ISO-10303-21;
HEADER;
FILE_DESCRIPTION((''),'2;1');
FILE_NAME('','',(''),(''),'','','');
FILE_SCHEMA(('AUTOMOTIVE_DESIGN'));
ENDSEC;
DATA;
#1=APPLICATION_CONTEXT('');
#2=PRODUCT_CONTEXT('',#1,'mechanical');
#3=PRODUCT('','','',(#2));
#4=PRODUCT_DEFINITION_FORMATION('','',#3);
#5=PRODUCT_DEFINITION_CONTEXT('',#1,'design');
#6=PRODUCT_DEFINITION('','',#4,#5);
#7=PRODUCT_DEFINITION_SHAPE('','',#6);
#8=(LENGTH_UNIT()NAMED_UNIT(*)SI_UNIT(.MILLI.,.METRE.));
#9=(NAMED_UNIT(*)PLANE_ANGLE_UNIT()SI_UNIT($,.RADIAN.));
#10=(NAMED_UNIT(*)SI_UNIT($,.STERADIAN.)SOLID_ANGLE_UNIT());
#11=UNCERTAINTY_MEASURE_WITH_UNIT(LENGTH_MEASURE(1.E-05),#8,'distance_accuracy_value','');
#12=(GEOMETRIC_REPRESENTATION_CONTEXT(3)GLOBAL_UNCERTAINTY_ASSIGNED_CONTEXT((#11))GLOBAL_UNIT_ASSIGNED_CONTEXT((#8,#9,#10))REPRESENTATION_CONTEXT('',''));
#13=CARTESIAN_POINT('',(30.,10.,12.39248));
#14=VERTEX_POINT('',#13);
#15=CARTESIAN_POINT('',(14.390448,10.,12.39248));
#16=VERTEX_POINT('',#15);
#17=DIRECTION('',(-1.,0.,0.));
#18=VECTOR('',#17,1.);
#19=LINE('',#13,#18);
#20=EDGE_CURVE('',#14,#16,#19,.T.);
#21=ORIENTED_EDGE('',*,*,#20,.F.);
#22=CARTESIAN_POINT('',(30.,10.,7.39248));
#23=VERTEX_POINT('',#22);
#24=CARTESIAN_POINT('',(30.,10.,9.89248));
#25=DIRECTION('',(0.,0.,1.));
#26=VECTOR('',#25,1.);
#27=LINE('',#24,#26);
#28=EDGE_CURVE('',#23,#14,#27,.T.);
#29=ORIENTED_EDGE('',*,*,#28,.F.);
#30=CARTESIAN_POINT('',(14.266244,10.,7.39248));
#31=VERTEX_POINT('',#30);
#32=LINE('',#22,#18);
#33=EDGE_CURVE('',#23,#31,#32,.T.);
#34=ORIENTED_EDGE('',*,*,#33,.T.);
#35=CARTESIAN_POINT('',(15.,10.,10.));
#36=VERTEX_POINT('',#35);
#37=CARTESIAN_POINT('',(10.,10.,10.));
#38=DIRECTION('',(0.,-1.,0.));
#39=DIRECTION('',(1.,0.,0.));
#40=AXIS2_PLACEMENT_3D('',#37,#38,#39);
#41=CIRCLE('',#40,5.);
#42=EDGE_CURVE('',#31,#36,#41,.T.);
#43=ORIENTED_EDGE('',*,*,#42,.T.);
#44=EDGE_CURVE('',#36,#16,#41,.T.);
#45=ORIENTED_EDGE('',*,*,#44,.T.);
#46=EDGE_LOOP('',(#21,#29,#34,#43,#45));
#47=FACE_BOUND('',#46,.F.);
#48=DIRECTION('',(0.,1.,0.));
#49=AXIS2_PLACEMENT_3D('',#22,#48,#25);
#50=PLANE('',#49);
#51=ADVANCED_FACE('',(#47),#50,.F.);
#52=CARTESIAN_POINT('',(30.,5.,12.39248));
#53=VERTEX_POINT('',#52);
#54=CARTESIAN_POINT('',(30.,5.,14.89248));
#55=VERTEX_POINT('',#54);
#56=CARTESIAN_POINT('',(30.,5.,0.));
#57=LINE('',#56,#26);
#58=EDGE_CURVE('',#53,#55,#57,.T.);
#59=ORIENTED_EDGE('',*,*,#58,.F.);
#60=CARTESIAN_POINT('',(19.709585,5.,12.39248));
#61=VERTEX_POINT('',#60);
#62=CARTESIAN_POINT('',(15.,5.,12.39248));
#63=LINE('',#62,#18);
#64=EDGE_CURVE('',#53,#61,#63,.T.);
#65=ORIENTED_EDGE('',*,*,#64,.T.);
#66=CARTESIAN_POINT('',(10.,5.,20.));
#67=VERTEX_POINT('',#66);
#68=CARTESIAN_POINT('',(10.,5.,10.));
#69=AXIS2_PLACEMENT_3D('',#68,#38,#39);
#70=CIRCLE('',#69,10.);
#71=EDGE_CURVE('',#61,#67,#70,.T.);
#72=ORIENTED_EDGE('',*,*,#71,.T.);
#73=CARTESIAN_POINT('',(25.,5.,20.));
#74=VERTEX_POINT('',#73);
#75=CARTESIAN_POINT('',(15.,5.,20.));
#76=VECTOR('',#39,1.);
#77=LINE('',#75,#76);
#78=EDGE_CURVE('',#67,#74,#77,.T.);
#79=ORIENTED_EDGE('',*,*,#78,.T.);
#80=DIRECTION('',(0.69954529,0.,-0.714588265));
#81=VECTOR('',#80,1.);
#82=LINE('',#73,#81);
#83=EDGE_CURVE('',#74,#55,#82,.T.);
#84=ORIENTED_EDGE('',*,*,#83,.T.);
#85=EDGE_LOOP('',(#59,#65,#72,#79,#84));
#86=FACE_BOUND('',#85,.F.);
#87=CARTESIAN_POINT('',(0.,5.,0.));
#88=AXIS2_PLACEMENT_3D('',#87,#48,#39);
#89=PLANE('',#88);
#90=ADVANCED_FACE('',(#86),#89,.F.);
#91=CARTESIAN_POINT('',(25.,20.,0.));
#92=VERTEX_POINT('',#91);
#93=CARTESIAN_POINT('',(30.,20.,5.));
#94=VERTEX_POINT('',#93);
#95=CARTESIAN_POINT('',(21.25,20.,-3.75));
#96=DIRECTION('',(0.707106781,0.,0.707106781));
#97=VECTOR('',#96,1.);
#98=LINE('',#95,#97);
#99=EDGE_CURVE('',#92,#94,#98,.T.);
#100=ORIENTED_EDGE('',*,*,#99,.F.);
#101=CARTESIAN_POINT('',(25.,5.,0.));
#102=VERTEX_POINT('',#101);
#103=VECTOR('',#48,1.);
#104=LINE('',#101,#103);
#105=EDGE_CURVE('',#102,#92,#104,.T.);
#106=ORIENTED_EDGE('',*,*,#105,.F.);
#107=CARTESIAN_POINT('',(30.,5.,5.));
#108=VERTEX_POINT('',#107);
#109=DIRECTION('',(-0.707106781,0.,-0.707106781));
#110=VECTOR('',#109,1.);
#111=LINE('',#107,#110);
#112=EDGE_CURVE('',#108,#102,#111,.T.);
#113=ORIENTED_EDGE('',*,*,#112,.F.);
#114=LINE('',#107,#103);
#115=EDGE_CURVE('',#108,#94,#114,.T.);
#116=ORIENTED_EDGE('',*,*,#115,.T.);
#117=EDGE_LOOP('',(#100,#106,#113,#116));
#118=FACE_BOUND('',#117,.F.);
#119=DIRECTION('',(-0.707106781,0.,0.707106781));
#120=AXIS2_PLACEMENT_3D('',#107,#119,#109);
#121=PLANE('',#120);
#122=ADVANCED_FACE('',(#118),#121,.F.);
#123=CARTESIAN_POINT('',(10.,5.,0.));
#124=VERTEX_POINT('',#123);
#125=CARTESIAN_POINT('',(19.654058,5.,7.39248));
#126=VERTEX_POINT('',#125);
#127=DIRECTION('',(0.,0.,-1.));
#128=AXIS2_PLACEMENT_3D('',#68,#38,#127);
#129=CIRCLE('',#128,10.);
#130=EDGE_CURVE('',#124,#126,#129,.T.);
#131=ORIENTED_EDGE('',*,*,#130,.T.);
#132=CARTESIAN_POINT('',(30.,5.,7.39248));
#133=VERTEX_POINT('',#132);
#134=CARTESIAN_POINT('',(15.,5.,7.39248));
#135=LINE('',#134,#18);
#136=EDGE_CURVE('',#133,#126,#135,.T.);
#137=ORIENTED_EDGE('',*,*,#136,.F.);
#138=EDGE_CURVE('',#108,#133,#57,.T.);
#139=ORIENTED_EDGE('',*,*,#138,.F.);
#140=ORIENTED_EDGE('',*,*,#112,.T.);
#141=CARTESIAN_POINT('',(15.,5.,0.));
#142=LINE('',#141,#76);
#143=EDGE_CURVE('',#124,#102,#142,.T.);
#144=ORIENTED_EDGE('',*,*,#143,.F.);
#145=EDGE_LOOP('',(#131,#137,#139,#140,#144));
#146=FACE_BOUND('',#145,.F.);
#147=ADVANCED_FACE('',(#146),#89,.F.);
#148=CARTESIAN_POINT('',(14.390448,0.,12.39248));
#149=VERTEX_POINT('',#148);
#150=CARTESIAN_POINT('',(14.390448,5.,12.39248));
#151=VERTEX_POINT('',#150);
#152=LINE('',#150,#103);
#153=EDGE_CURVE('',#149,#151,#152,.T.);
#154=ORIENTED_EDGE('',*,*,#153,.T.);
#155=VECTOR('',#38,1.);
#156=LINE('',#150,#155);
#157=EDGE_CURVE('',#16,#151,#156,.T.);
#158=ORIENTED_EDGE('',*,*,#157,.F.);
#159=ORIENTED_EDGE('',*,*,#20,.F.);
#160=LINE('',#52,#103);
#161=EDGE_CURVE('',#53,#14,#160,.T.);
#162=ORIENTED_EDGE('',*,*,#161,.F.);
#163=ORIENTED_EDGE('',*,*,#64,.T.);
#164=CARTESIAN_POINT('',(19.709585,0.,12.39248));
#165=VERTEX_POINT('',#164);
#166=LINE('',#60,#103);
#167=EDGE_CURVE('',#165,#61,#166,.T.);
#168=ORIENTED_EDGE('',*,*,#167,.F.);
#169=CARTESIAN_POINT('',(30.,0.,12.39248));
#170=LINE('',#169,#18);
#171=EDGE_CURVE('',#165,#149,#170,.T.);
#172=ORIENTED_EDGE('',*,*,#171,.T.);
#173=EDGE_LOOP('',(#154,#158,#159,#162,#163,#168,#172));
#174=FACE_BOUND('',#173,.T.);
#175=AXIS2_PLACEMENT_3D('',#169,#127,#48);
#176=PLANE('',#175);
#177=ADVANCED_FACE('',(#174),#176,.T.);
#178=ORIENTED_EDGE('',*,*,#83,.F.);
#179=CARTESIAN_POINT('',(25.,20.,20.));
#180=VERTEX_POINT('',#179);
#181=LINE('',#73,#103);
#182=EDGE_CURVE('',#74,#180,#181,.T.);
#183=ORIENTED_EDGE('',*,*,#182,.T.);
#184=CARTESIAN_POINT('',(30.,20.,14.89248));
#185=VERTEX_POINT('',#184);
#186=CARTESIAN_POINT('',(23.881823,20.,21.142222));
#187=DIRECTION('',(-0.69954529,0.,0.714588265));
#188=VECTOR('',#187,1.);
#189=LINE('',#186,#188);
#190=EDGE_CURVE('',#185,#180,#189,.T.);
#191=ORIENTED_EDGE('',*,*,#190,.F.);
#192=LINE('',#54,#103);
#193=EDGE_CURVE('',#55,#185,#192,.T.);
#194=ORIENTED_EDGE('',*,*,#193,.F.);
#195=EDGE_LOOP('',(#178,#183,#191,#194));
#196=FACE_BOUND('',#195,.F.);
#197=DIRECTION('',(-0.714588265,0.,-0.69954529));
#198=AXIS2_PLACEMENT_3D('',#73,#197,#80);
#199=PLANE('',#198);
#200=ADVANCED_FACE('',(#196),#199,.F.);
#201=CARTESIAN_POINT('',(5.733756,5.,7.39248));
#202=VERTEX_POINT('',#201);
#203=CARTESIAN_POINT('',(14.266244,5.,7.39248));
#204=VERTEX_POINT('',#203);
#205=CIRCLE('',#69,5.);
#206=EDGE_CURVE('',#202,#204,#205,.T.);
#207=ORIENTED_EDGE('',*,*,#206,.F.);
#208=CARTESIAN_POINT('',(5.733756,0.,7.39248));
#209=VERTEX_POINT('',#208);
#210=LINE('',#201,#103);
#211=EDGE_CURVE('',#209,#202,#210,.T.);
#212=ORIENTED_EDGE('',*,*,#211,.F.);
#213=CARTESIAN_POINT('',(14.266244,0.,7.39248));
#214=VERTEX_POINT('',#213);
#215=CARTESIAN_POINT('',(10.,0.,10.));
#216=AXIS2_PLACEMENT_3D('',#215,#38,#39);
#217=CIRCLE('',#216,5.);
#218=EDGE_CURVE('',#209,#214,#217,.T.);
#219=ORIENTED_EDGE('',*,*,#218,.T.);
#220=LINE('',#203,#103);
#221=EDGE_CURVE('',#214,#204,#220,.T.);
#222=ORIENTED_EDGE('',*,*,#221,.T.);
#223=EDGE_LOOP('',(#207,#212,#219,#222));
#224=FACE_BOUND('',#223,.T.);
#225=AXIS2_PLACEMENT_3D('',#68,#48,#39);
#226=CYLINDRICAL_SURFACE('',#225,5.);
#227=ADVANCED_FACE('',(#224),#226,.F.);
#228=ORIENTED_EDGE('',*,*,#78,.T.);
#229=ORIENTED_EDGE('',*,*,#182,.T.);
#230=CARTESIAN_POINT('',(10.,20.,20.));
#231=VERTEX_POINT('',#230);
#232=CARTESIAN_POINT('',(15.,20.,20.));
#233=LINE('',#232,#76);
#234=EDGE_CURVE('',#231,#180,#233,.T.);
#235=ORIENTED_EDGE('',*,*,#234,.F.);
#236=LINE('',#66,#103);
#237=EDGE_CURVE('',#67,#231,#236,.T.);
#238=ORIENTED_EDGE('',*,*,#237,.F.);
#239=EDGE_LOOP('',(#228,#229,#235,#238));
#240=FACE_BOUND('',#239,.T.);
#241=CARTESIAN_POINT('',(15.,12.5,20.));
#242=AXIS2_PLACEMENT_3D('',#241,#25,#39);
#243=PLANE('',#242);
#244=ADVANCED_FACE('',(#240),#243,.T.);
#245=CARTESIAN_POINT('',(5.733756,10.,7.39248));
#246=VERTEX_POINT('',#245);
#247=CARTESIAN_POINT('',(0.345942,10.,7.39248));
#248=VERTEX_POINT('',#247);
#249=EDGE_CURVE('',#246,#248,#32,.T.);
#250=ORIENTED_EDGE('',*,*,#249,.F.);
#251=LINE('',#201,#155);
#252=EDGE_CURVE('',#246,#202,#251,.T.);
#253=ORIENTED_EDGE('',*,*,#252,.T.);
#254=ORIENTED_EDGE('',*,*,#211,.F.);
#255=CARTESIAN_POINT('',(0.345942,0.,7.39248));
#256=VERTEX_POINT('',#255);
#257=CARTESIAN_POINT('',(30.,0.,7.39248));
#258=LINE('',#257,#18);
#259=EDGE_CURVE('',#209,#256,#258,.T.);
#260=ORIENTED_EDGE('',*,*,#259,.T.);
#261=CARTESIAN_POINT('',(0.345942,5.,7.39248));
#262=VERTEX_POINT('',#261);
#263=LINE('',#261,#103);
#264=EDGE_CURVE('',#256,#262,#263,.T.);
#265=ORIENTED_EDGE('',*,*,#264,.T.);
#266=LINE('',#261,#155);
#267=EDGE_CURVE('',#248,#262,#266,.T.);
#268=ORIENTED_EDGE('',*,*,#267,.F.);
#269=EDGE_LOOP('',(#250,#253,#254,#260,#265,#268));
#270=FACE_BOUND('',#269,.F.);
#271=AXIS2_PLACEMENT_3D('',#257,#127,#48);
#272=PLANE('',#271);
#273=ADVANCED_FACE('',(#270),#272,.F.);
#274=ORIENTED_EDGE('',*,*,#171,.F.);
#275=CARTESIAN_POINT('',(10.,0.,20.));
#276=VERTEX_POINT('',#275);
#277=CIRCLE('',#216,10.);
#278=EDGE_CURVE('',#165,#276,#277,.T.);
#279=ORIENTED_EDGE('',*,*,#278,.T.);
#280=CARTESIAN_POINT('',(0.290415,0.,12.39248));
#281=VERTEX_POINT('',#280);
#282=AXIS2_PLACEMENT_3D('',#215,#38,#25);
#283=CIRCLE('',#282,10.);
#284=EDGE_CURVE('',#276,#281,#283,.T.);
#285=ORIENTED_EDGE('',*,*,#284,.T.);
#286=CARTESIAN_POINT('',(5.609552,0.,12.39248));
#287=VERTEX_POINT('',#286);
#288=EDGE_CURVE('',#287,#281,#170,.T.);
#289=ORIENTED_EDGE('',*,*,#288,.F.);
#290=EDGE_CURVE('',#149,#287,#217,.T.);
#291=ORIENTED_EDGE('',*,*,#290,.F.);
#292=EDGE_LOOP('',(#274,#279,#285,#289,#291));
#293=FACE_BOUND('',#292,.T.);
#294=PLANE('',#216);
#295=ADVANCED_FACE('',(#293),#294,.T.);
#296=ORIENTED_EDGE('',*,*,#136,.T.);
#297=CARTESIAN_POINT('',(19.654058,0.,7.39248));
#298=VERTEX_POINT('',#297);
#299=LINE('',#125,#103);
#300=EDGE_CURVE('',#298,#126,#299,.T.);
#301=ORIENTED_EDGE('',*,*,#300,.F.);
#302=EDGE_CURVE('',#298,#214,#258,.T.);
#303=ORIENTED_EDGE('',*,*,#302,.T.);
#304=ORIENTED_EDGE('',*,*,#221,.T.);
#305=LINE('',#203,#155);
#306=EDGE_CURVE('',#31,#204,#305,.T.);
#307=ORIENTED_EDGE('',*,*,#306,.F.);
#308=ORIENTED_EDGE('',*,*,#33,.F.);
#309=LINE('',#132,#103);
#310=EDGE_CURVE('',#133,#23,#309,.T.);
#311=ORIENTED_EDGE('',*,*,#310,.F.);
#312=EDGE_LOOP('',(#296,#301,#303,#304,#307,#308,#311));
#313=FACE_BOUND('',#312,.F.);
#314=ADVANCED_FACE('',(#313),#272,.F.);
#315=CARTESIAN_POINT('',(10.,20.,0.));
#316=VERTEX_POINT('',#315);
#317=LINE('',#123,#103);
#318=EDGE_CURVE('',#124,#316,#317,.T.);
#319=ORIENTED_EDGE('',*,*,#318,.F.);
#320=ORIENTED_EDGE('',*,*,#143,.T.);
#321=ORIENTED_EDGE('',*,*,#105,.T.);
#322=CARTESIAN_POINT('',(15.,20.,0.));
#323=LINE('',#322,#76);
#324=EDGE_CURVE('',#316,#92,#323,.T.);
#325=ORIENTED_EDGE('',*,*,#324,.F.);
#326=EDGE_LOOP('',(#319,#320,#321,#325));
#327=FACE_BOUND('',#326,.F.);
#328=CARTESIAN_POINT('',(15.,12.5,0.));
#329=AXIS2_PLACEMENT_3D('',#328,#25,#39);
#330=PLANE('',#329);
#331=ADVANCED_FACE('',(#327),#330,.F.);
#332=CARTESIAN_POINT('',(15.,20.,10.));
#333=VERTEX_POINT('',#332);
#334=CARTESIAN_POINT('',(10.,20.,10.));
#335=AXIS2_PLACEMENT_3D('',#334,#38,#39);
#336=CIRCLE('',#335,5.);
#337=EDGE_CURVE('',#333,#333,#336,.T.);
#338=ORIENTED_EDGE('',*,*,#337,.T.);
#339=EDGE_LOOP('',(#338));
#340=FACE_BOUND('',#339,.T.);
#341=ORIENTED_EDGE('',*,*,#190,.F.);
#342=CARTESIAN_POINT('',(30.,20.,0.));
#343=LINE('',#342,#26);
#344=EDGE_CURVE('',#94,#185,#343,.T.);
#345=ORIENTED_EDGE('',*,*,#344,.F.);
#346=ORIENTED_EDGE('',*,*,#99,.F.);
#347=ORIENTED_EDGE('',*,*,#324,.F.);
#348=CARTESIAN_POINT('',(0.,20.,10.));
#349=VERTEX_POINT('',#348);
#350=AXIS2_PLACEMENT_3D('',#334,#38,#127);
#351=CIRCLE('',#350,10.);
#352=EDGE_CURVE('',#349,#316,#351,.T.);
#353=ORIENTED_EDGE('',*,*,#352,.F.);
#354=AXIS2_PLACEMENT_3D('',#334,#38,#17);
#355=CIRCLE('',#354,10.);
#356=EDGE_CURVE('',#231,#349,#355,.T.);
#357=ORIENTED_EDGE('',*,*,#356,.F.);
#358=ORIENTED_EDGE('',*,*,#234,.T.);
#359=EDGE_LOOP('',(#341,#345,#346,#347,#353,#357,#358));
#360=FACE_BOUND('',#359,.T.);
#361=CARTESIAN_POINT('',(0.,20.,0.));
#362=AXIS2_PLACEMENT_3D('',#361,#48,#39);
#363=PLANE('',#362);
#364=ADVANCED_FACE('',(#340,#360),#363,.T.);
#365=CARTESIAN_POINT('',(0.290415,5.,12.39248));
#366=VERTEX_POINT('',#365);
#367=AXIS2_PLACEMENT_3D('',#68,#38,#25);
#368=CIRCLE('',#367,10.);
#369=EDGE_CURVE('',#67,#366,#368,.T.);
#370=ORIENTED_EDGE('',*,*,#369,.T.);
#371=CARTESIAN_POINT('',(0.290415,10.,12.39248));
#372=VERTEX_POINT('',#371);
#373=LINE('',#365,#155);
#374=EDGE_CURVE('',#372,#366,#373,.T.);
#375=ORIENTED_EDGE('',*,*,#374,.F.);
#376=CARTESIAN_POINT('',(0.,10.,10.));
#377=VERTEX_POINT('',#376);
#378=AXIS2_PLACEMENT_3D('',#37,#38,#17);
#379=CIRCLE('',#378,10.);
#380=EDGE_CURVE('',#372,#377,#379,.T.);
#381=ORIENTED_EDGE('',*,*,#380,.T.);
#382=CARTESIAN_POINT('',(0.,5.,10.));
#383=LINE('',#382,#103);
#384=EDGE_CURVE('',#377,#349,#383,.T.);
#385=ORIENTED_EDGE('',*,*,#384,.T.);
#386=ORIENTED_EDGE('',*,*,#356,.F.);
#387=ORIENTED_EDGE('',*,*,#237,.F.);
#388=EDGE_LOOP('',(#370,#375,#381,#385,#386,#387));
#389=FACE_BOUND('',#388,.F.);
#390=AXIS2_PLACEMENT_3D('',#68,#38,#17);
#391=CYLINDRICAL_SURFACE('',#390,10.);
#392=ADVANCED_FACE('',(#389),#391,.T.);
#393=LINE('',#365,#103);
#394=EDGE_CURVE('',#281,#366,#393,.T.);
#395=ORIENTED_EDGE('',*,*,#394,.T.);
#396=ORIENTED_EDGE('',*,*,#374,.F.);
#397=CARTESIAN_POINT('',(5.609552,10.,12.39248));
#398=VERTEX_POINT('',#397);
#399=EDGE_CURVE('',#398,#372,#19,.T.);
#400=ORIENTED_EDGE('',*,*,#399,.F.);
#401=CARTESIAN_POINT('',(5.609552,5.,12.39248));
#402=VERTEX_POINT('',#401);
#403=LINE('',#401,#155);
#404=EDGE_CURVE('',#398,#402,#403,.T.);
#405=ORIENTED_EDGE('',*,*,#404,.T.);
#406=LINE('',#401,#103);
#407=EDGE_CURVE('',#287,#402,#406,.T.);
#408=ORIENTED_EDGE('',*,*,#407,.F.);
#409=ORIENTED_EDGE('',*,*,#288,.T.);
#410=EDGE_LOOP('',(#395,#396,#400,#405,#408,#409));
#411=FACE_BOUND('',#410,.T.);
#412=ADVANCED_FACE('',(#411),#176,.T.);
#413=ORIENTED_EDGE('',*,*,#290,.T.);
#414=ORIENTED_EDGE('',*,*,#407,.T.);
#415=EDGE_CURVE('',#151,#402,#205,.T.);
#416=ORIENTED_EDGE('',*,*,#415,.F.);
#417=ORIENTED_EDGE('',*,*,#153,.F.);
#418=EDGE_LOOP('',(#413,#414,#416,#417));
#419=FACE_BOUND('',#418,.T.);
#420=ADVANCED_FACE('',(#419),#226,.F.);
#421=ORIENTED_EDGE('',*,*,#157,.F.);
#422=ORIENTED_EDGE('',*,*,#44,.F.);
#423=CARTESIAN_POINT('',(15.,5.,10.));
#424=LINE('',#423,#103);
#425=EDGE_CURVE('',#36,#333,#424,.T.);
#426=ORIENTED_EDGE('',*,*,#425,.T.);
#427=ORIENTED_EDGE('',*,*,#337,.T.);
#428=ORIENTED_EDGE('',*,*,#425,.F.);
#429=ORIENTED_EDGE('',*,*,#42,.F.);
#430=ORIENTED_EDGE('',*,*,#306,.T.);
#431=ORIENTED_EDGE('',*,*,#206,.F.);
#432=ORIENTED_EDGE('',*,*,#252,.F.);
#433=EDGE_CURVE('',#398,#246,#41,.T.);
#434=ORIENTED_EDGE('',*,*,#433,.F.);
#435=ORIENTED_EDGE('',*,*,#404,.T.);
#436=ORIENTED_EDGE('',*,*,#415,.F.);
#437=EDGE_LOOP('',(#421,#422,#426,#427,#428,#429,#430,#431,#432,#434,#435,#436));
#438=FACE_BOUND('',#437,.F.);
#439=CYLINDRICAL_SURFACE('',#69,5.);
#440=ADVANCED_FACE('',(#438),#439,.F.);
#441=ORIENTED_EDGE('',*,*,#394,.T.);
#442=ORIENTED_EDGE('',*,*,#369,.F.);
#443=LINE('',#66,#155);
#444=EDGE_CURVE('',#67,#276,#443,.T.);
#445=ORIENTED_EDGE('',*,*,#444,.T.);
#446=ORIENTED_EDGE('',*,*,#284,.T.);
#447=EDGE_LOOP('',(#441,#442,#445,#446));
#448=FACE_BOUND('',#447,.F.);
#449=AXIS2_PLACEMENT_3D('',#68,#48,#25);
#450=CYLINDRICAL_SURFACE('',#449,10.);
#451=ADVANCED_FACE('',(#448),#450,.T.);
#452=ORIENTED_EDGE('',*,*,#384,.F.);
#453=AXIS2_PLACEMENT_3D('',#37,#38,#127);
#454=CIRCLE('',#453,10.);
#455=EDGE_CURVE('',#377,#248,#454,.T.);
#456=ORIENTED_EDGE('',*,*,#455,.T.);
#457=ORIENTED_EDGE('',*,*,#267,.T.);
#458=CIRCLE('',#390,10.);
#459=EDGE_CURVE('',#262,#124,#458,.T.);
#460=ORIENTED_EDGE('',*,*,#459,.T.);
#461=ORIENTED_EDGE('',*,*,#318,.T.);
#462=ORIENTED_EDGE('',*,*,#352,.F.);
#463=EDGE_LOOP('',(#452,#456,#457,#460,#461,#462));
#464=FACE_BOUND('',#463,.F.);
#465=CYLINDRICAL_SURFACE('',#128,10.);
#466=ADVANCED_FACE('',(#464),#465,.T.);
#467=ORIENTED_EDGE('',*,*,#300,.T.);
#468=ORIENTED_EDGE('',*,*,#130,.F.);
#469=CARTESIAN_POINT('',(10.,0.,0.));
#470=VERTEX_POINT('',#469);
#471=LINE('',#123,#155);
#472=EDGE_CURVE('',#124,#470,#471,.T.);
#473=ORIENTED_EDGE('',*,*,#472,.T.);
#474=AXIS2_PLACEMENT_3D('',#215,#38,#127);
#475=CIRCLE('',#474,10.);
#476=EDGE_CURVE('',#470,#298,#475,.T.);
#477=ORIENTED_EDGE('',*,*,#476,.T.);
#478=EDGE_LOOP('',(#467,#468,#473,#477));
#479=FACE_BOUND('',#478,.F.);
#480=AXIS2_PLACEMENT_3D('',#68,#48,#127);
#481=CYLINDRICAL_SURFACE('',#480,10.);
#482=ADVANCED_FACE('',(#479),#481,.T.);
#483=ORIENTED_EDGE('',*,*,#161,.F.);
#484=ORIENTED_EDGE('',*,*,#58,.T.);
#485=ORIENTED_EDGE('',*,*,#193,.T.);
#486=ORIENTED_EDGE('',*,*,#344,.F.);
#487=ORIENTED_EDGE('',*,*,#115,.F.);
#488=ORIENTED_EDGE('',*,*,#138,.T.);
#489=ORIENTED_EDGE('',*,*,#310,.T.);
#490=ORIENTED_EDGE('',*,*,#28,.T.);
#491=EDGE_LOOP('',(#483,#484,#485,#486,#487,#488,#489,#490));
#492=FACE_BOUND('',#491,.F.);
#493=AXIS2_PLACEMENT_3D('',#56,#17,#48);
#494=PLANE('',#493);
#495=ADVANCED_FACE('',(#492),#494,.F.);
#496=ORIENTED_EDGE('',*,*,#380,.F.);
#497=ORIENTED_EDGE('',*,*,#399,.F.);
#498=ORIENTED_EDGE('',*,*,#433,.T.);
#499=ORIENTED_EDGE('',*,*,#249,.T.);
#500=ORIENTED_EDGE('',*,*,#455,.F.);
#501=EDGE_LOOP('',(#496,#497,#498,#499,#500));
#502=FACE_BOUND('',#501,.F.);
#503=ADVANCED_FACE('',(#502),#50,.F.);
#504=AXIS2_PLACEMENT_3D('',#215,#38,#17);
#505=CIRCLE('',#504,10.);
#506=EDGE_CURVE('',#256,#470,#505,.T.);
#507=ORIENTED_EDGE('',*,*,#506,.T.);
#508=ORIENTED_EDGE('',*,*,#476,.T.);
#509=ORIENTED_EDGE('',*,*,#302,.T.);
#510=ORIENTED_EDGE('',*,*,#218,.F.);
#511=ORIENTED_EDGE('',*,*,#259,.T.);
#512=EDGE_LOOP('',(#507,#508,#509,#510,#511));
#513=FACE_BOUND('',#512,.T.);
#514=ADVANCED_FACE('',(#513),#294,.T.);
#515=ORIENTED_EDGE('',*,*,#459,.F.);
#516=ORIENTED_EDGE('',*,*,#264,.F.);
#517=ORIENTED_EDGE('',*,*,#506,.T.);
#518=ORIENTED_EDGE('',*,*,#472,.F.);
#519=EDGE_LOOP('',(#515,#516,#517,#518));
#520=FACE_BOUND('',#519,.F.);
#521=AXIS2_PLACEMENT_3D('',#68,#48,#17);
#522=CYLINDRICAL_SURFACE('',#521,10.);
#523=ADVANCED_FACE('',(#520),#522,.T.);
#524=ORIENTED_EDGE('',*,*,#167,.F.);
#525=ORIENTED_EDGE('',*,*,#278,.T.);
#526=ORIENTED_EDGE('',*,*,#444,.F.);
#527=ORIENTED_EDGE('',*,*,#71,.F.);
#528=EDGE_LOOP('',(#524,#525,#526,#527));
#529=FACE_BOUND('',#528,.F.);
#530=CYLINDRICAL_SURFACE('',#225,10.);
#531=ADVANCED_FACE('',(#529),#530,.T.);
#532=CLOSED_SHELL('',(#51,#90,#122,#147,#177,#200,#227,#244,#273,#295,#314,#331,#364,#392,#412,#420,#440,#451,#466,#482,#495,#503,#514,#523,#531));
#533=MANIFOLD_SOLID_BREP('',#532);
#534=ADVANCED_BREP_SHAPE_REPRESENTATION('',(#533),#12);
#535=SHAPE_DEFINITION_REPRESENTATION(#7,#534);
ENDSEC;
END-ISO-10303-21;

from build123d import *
from build123d import SkipClean  # not in build123d's __all__

# Parameters (mm, degrees)
F0_W     = 30
F0_H     = 15
F1_DEPTH = 20
F3_DEPTH = 15.001
F2_R     = 5
F4_DEPTH = 15.001
F5_DEPTH = 5
F6_W     = 10
F6_H     = 5
F7_DEPTH = 30.001
F9_DEPTH = 15.001


with BuildPart() as f1:
    # F0 (on Top) → F1 (new body)
    with BuildSketch(Plane.XY):
        with Locations((15, 12.5)):
            Rectangle(F0_W, F0_H)
    extrude(amount=F1_DEPTH)

    # F2 (on face) → F3 (cut, through all)
    with BuildSketch(Plane.XZ.offset(-5)):
        Polygon((30, 14.8924803361), (30, 20), (25, 20), align=None)
        Polygon((30, 0), (30, 5), (25, 0), align=None)
    extrude(amount=-F3_DEPTH, mode=Mode.SUBTRACT)

    # F2 (on face) → F4 (cut, through all)
    with BuildSketch(Plane.XZ.offset(-5)):
        with Locations((10, 10)):
            Circle(F2_R)
    extrude(amount=-F4_DEPTH, mode=Mode.SUBTRACT)

    # F2 (on face) → F5 (join)
    with BuildSketch(Plane.XZ.offset(-5)):
        with BuildLine():
            ThreePointArc((20, 10), (17.0710678119, 17.0710678119), (10, 20))
            ThreePointArc((10, 20), (2.9289321881, 17.0710678119), (0, 10))
            ThreePointArc((0, 10), (2.9289321881, 2.9289321881), (10, 0))
            ThreePointArc((10, 0), (17.0710678119, 2.9289321881), (20, 10))
        make_face()
        with Locations((10, 10)):
            Circle(F2_R, mode=Mode.SUBTRACT)
    extrude(amount=F5_DEPTH)

    # F6 (on face) → F7 (cut, through all)
    with BuildSketch(Plane.YZ.offset(30)):
        with Locations((5, 9.8924803361)):
            Rectangle(F6_W, F6_H)
    extrude(amount=-F7_DEPTH, mode=Mode.SUBTRACT)

    # F8 (on face) → F9 (cut, through all)
    with BuildSketch(Plane.XZ.offset(-5)):
        with BuildLine():
            Line((0, 20), (0, 10))
            ThreePointArc((0, 10), (2.9289321881, 17.0710678119), (10, 20))
            Line((10, 20), (0, 20))
        make_face()
        with BuildLine():
            Line((0, 10), (0, 0))
            Line((0, 0), (10, 0))
            ThreePointArc((10, 0), (2.9289321881, 2.9289321881), (0, 10))
        make_face()
    with SkipClean():  # cleaning this boolean's faces spoils the solid; the shape is the same uncleaned
        extrude(amount=-F9_DEPTH, mode=Mode.SUBTRACT)


solid = f1.part
